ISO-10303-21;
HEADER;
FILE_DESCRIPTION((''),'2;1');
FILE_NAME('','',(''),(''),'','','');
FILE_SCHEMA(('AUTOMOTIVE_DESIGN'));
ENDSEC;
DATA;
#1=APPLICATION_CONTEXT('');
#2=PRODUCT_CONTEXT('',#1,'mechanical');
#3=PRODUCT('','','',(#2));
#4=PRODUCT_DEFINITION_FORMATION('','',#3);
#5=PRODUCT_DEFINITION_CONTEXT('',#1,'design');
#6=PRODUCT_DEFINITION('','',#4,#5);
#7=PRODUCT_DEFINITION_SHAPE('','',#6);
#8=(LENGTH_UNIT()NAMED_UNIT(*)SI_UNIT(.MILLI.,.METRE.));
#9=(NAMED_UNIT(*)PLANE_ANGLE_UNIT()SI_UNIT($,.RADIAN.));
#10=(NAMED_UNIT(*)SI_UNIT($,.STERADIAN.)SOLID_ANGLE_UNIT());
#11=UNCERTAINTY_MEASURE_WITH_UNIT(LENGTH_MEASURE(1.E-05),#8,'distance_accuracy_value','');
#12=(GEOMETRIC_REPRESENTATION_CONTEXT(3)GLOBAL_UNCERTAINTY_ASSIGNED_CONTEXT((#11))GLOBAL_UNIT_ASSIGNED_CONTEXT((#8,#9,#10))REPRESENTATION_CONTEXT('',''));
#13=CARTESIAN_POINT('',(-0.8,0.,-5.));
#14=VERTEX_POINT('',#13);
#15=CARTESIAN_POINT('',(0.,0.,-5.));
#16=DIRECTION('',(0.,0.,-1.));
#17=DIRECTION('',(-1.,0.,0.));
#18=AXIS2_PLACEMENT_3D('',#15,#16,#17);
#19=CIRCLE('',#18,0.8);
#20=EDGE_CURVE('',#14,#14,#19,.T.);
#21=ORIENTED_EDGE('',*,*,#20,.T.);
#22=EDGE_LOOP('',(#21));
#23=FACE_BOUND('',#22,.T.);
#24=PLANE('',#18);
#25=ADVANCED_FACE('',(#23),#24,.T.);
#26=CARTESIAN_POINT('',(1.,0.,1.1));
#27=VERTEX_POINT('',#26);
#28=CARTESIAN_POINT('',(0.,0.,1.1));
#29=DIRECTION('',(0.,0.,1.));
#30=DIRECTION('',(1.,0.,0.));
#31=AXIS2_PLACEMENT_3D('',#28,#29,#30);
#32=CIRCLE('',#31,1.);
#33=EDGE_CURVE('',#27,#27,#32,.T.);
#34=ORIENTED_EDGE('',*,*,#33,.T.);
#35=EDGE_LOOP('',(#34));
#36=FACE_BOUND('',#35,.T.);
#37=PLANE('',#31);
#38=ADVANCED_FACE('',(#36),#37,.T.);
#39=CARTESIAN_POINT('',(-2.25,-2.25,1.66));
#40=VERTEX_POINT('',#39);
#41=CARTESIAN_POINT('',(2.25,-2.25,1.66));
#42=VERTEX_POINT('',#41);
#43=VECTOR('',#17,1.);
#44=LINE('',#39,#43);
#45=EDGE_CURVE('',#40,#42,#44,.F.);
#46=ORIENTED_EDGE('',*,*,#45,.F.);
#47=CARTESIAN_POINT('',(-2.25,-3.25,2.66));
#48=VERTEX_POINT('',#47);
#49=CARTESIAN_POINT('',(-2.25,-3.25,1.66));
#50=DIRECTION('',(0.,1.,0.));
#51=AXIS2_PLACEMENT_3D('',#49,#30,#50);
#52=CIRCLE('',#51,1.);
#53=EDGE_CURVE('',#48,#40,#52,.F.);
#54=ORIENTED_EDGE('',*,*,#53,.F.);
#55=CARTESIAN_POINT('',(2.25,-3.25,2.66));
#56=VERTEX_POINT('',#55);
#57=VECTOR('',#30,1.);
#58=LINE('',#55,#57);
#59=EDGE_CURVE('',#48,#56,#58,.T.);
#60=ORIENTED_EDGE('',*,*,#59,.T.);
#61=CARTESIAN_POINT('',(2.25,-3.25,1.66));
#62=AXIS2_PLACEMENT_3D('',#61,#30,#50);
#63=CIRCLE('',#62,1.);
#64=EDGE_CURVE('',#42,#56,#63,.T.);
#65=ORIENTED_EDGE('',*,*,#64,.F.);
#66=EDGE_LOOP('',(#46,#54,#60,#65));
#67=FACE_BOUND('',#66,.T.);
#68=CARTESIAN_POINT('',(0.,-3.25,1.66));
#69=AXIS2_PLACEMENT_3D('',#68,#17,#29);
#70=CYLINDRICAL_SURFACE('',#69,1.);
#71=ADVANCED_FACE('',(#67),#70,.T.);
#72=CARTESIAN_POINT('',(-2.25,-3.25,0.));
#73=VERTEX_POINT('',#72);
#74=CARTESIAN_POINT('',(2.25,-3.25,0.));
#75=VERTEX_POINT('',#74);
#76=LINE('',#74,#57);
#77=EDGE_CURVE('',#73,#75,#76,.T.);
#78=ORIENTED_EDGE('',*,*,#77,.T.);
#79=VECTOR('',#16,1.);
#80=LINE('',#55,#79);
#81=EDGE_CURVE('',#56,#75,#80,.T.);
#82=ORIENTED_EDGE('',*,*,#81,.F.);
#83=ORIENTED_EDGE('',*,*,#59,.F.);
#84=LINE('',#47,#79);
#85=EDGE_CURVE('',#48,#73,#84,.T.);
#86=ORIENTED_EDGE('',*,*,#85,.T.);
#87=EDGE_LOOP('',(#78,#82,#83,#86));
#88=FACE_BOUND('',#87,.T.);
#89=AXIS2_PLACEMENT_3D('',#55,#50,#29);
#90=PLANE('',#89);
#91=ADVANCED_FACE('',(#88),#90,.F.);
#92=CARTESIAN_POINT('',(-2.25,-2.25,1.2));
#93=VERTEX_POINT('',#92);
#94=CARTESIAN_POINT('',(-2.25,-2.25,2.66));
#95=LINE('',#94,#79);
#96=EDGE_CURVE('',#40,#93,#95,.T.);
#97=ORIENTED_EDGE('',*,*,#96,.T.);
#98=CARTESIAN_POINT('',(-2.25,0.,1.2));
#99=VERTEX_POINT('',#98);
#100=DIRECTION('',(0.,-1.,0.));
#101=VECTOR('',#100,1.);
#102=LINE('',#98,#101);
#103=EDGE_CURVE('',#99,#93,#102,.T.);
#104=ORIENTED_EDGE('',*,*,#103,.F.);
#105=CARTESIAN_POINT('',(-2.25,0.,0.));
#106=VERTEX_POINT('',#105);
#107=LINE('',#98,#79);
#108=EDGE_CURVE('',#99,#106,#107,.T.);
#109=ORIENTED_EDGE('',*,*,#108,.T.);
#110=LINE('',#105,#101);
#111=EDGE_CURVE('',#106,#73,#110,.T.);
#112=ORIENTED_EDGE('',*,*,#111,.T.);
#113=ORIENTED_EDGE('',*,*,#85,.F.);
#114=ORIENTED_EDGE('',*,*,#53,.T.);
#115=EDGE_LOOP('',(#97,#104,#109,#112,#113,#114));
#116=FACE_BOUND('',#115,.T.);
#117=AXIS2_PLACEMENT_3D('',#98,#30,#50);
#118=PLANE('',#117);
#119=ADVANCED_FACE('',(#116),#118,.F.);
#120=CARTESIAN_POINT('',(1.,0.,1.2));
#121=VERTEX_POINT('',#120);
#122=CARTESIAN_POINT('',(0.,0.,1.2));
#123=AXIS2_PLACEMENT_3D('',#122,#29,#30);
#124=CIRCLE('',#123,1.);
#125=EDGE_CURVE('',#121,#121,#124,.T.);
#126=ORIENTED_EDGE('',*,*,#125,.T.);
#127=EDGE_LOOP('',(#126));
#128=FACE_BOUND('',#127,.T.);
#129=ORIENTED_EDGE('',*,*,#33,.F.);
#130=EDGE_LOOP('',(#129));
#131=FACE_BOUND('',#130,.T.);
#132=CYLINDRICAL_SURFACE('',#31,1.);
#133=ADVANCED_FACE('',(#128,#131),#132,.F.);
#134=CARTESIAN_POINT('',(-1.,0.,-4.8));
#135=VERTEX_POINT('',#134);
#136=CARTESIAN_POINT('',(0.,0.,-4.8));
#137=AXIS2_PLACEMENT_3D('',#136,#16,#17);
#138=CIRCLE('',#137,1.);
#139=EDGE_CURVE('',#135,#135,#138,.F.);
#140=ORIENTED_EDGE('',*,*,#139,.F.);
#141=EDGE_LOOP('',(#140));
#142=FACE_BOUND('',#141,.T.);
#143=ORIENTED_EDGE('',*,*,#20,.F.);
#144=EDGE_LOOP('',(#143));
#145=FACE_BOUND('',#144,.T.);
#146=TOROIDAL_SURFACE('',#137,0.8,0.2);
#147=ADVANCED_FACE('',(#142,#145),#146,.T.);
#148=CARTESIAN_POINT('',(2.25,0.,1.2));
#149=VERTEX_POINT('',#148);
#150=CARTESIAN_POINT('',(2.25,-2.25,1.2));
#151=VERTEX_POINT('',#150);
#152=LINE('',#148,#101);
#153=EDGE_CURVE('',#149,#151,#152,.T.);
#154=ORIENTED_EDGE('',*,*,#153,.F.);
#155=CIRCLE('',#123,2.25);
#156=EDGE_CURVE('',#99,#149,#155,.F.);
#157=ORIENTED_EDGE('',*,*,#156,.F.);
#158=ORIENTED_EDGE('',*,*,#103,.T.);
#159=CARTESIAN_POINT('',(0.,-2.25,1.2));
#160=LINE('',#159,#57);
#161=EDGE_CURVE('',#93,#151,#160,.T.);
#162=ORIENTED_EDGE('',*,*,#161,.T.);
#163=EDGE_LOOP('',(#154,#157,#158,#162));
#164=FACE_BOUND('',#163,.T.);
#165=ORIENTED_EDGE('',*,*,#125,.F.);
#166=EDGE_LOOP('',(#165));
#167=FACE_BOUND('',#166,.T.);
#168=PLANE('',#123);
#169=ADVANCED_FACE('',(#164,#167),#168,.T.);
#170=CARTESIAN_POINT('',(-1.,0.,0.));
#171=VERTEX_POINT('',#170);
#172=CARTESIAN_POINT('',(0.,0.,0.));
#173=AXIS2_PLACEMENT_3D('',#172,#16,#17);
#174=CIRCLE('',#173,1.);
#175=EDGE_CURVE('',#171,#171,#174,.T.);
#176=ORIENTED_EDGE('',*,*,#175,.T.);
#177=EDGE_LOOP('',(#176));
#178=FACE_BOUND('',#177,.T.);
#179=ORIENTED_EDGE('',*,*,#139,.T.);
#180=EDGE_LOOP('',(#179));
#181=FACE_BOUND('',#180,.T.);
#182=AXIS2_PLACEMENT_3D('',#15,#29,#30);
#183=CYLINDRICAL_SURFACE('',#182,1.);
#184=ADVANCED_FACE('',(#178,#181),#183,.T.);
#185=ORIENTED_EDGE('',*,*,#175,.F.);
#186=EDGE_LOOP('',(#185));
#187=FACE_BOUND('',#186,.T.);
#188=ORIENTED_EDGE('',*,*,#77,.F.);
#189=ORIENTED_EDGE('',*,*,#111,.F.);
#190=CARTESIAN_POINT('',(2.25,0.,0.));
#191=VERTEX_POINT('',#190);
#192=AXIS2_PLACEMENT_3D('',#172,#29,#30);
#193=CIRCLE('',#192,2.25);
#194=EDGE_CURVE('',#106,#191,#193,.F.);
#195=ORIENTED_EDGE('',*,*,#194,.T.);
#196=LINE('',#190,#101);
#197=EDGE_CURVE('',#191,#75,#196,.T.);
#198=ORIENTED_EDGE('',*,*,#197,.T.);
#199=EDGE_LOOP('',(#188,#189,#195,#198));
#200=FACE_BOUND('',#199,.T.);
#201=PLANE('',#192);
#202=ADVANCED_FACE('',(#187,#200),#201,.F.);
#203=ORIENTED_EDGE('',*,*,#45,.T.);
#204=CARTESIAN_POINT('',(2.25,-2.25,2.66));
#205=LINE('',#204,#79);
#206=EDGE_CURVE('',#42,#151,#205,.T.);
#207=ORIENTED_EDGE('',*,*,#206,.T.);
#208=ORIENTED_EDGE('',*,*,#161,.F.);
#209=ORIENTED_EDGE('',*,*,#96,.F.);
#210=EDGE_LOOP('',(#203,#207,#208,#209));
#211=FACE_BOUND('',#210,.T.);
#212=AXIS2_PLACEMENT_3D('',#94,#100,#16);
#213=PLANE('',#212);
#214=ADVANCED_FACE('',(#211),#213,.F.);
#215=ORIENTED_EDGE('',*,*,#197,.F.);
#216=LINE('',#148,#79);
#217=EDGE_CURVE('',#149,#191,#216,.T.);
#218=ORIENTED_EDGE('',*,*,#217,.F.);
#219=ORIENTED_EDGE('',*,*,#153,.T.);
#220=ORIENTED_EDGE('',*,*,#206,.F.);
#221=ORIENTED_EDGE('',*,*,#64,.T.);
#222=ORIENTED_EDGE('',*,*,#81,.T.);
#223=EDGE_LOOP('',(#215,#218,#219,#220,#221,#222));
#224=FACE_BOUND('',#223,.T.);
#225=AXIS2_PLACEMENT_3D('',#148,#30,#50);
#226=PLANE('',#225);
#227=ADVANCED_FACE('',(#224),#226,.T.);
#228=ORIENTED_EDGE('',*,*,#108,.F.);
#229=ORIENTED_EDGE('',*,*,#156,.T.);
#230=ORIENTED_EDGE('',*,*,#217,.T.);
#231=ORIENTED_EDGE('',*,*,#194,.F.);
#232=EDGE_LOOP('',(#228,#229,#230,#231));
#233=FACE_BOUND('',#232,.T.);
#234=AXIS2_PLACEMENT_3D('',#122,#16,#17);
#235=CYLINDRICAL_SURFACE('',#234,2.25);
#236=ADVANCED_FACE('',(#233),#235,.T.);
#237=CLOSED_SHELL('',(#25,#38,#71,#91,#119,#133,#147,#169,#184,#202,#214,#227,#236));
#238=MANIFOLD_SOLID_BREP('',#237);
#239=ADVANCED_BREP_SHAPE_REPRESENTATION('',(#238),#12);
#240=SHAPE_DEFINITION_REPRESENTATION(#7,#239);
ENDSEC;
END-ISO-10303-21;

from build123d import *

# Parameters (mm, degrees)
BOSS_EXTRUDE1_DEPTH = 1.2
SKETCH2_W           = 4.5
SKETCH2_H           = 1
BOSS_EXTRUDE2_DEPTH = 2.66
FILLET1_R           = 1
SKETCH3_R           = 1
CUT_EXTRUDE1_DEPTH  = 0.1
SKETCH4_R           = 1
BOSS_EXTRUDE3_DEPTH = 5
FILLET2_R           = 0.2


with BuildPart() as part:
    # Sketch1 → Boss-Extrude1 (new body)
    with BuildSketch(Plane.XY):
        with BuildLine():
            Line((-2.25, 0), (-2.25, -2.25))
            Line((-2.25, -2.25), (2.25, -2.25))
            Line((2.25, -2.25), (2.25, 0))
            ThreePointArc((2.25, 0), (0, 2.25), (-2.25, 0))
        make_face()
    extrude(amount=BOSS_EXTRUDE1_DEPTH)

    # Sketch2 → Boss-Extrude2 (add)
    with BuildSketch(Plane.XY):
        with Locations((0, -2.75)):
            Rectangle(SKETCH2_W, SKETCH2_H)
    extrude(amount=BOSS_EXTRUDE2_DEPTH)

    # Fillet1
    fillet1_edges = [part.edges().sort_by_distance(p)[0] for p in [
        (0, -2.25, 2.66),
    ]]
    fillet(fillet1_edges, radius=FILLET1_R - 0.0001)  # a hair under: the kernel refuses the full size

    # Sketch3 → Cut-Extrude1 (cut)
    with BuildSketch(Plane.XY.offset(1.2)):
        Circle(SKETCH3_R)
    extrude(amount=-CUT_EXTRUDE1_DEPTH, mode=Mode.SUBTRACT)

    # Sketch4 → Boss-Extrude3 (add)
    with BuildSketch(Plane(origin=(0, 0, 0), x_dir=(-1, 0, 0), z_dir=(0, 0, -1))):
        with Locations(Location((0, 0, 0), (0, 0, 180))):
            Circle(SKETCH4_R)
    extrude(amount=BOSS_EXTRUDE3_DEPTH)

    # Fillet2
    fillet2_edges = [part.edges().sort_by_distance(p)[0] for p in [
        (-1, 0, -5),
    ]]
    fillet(fillet2_edges, radius=FILLET2_R)


solid = part.part
